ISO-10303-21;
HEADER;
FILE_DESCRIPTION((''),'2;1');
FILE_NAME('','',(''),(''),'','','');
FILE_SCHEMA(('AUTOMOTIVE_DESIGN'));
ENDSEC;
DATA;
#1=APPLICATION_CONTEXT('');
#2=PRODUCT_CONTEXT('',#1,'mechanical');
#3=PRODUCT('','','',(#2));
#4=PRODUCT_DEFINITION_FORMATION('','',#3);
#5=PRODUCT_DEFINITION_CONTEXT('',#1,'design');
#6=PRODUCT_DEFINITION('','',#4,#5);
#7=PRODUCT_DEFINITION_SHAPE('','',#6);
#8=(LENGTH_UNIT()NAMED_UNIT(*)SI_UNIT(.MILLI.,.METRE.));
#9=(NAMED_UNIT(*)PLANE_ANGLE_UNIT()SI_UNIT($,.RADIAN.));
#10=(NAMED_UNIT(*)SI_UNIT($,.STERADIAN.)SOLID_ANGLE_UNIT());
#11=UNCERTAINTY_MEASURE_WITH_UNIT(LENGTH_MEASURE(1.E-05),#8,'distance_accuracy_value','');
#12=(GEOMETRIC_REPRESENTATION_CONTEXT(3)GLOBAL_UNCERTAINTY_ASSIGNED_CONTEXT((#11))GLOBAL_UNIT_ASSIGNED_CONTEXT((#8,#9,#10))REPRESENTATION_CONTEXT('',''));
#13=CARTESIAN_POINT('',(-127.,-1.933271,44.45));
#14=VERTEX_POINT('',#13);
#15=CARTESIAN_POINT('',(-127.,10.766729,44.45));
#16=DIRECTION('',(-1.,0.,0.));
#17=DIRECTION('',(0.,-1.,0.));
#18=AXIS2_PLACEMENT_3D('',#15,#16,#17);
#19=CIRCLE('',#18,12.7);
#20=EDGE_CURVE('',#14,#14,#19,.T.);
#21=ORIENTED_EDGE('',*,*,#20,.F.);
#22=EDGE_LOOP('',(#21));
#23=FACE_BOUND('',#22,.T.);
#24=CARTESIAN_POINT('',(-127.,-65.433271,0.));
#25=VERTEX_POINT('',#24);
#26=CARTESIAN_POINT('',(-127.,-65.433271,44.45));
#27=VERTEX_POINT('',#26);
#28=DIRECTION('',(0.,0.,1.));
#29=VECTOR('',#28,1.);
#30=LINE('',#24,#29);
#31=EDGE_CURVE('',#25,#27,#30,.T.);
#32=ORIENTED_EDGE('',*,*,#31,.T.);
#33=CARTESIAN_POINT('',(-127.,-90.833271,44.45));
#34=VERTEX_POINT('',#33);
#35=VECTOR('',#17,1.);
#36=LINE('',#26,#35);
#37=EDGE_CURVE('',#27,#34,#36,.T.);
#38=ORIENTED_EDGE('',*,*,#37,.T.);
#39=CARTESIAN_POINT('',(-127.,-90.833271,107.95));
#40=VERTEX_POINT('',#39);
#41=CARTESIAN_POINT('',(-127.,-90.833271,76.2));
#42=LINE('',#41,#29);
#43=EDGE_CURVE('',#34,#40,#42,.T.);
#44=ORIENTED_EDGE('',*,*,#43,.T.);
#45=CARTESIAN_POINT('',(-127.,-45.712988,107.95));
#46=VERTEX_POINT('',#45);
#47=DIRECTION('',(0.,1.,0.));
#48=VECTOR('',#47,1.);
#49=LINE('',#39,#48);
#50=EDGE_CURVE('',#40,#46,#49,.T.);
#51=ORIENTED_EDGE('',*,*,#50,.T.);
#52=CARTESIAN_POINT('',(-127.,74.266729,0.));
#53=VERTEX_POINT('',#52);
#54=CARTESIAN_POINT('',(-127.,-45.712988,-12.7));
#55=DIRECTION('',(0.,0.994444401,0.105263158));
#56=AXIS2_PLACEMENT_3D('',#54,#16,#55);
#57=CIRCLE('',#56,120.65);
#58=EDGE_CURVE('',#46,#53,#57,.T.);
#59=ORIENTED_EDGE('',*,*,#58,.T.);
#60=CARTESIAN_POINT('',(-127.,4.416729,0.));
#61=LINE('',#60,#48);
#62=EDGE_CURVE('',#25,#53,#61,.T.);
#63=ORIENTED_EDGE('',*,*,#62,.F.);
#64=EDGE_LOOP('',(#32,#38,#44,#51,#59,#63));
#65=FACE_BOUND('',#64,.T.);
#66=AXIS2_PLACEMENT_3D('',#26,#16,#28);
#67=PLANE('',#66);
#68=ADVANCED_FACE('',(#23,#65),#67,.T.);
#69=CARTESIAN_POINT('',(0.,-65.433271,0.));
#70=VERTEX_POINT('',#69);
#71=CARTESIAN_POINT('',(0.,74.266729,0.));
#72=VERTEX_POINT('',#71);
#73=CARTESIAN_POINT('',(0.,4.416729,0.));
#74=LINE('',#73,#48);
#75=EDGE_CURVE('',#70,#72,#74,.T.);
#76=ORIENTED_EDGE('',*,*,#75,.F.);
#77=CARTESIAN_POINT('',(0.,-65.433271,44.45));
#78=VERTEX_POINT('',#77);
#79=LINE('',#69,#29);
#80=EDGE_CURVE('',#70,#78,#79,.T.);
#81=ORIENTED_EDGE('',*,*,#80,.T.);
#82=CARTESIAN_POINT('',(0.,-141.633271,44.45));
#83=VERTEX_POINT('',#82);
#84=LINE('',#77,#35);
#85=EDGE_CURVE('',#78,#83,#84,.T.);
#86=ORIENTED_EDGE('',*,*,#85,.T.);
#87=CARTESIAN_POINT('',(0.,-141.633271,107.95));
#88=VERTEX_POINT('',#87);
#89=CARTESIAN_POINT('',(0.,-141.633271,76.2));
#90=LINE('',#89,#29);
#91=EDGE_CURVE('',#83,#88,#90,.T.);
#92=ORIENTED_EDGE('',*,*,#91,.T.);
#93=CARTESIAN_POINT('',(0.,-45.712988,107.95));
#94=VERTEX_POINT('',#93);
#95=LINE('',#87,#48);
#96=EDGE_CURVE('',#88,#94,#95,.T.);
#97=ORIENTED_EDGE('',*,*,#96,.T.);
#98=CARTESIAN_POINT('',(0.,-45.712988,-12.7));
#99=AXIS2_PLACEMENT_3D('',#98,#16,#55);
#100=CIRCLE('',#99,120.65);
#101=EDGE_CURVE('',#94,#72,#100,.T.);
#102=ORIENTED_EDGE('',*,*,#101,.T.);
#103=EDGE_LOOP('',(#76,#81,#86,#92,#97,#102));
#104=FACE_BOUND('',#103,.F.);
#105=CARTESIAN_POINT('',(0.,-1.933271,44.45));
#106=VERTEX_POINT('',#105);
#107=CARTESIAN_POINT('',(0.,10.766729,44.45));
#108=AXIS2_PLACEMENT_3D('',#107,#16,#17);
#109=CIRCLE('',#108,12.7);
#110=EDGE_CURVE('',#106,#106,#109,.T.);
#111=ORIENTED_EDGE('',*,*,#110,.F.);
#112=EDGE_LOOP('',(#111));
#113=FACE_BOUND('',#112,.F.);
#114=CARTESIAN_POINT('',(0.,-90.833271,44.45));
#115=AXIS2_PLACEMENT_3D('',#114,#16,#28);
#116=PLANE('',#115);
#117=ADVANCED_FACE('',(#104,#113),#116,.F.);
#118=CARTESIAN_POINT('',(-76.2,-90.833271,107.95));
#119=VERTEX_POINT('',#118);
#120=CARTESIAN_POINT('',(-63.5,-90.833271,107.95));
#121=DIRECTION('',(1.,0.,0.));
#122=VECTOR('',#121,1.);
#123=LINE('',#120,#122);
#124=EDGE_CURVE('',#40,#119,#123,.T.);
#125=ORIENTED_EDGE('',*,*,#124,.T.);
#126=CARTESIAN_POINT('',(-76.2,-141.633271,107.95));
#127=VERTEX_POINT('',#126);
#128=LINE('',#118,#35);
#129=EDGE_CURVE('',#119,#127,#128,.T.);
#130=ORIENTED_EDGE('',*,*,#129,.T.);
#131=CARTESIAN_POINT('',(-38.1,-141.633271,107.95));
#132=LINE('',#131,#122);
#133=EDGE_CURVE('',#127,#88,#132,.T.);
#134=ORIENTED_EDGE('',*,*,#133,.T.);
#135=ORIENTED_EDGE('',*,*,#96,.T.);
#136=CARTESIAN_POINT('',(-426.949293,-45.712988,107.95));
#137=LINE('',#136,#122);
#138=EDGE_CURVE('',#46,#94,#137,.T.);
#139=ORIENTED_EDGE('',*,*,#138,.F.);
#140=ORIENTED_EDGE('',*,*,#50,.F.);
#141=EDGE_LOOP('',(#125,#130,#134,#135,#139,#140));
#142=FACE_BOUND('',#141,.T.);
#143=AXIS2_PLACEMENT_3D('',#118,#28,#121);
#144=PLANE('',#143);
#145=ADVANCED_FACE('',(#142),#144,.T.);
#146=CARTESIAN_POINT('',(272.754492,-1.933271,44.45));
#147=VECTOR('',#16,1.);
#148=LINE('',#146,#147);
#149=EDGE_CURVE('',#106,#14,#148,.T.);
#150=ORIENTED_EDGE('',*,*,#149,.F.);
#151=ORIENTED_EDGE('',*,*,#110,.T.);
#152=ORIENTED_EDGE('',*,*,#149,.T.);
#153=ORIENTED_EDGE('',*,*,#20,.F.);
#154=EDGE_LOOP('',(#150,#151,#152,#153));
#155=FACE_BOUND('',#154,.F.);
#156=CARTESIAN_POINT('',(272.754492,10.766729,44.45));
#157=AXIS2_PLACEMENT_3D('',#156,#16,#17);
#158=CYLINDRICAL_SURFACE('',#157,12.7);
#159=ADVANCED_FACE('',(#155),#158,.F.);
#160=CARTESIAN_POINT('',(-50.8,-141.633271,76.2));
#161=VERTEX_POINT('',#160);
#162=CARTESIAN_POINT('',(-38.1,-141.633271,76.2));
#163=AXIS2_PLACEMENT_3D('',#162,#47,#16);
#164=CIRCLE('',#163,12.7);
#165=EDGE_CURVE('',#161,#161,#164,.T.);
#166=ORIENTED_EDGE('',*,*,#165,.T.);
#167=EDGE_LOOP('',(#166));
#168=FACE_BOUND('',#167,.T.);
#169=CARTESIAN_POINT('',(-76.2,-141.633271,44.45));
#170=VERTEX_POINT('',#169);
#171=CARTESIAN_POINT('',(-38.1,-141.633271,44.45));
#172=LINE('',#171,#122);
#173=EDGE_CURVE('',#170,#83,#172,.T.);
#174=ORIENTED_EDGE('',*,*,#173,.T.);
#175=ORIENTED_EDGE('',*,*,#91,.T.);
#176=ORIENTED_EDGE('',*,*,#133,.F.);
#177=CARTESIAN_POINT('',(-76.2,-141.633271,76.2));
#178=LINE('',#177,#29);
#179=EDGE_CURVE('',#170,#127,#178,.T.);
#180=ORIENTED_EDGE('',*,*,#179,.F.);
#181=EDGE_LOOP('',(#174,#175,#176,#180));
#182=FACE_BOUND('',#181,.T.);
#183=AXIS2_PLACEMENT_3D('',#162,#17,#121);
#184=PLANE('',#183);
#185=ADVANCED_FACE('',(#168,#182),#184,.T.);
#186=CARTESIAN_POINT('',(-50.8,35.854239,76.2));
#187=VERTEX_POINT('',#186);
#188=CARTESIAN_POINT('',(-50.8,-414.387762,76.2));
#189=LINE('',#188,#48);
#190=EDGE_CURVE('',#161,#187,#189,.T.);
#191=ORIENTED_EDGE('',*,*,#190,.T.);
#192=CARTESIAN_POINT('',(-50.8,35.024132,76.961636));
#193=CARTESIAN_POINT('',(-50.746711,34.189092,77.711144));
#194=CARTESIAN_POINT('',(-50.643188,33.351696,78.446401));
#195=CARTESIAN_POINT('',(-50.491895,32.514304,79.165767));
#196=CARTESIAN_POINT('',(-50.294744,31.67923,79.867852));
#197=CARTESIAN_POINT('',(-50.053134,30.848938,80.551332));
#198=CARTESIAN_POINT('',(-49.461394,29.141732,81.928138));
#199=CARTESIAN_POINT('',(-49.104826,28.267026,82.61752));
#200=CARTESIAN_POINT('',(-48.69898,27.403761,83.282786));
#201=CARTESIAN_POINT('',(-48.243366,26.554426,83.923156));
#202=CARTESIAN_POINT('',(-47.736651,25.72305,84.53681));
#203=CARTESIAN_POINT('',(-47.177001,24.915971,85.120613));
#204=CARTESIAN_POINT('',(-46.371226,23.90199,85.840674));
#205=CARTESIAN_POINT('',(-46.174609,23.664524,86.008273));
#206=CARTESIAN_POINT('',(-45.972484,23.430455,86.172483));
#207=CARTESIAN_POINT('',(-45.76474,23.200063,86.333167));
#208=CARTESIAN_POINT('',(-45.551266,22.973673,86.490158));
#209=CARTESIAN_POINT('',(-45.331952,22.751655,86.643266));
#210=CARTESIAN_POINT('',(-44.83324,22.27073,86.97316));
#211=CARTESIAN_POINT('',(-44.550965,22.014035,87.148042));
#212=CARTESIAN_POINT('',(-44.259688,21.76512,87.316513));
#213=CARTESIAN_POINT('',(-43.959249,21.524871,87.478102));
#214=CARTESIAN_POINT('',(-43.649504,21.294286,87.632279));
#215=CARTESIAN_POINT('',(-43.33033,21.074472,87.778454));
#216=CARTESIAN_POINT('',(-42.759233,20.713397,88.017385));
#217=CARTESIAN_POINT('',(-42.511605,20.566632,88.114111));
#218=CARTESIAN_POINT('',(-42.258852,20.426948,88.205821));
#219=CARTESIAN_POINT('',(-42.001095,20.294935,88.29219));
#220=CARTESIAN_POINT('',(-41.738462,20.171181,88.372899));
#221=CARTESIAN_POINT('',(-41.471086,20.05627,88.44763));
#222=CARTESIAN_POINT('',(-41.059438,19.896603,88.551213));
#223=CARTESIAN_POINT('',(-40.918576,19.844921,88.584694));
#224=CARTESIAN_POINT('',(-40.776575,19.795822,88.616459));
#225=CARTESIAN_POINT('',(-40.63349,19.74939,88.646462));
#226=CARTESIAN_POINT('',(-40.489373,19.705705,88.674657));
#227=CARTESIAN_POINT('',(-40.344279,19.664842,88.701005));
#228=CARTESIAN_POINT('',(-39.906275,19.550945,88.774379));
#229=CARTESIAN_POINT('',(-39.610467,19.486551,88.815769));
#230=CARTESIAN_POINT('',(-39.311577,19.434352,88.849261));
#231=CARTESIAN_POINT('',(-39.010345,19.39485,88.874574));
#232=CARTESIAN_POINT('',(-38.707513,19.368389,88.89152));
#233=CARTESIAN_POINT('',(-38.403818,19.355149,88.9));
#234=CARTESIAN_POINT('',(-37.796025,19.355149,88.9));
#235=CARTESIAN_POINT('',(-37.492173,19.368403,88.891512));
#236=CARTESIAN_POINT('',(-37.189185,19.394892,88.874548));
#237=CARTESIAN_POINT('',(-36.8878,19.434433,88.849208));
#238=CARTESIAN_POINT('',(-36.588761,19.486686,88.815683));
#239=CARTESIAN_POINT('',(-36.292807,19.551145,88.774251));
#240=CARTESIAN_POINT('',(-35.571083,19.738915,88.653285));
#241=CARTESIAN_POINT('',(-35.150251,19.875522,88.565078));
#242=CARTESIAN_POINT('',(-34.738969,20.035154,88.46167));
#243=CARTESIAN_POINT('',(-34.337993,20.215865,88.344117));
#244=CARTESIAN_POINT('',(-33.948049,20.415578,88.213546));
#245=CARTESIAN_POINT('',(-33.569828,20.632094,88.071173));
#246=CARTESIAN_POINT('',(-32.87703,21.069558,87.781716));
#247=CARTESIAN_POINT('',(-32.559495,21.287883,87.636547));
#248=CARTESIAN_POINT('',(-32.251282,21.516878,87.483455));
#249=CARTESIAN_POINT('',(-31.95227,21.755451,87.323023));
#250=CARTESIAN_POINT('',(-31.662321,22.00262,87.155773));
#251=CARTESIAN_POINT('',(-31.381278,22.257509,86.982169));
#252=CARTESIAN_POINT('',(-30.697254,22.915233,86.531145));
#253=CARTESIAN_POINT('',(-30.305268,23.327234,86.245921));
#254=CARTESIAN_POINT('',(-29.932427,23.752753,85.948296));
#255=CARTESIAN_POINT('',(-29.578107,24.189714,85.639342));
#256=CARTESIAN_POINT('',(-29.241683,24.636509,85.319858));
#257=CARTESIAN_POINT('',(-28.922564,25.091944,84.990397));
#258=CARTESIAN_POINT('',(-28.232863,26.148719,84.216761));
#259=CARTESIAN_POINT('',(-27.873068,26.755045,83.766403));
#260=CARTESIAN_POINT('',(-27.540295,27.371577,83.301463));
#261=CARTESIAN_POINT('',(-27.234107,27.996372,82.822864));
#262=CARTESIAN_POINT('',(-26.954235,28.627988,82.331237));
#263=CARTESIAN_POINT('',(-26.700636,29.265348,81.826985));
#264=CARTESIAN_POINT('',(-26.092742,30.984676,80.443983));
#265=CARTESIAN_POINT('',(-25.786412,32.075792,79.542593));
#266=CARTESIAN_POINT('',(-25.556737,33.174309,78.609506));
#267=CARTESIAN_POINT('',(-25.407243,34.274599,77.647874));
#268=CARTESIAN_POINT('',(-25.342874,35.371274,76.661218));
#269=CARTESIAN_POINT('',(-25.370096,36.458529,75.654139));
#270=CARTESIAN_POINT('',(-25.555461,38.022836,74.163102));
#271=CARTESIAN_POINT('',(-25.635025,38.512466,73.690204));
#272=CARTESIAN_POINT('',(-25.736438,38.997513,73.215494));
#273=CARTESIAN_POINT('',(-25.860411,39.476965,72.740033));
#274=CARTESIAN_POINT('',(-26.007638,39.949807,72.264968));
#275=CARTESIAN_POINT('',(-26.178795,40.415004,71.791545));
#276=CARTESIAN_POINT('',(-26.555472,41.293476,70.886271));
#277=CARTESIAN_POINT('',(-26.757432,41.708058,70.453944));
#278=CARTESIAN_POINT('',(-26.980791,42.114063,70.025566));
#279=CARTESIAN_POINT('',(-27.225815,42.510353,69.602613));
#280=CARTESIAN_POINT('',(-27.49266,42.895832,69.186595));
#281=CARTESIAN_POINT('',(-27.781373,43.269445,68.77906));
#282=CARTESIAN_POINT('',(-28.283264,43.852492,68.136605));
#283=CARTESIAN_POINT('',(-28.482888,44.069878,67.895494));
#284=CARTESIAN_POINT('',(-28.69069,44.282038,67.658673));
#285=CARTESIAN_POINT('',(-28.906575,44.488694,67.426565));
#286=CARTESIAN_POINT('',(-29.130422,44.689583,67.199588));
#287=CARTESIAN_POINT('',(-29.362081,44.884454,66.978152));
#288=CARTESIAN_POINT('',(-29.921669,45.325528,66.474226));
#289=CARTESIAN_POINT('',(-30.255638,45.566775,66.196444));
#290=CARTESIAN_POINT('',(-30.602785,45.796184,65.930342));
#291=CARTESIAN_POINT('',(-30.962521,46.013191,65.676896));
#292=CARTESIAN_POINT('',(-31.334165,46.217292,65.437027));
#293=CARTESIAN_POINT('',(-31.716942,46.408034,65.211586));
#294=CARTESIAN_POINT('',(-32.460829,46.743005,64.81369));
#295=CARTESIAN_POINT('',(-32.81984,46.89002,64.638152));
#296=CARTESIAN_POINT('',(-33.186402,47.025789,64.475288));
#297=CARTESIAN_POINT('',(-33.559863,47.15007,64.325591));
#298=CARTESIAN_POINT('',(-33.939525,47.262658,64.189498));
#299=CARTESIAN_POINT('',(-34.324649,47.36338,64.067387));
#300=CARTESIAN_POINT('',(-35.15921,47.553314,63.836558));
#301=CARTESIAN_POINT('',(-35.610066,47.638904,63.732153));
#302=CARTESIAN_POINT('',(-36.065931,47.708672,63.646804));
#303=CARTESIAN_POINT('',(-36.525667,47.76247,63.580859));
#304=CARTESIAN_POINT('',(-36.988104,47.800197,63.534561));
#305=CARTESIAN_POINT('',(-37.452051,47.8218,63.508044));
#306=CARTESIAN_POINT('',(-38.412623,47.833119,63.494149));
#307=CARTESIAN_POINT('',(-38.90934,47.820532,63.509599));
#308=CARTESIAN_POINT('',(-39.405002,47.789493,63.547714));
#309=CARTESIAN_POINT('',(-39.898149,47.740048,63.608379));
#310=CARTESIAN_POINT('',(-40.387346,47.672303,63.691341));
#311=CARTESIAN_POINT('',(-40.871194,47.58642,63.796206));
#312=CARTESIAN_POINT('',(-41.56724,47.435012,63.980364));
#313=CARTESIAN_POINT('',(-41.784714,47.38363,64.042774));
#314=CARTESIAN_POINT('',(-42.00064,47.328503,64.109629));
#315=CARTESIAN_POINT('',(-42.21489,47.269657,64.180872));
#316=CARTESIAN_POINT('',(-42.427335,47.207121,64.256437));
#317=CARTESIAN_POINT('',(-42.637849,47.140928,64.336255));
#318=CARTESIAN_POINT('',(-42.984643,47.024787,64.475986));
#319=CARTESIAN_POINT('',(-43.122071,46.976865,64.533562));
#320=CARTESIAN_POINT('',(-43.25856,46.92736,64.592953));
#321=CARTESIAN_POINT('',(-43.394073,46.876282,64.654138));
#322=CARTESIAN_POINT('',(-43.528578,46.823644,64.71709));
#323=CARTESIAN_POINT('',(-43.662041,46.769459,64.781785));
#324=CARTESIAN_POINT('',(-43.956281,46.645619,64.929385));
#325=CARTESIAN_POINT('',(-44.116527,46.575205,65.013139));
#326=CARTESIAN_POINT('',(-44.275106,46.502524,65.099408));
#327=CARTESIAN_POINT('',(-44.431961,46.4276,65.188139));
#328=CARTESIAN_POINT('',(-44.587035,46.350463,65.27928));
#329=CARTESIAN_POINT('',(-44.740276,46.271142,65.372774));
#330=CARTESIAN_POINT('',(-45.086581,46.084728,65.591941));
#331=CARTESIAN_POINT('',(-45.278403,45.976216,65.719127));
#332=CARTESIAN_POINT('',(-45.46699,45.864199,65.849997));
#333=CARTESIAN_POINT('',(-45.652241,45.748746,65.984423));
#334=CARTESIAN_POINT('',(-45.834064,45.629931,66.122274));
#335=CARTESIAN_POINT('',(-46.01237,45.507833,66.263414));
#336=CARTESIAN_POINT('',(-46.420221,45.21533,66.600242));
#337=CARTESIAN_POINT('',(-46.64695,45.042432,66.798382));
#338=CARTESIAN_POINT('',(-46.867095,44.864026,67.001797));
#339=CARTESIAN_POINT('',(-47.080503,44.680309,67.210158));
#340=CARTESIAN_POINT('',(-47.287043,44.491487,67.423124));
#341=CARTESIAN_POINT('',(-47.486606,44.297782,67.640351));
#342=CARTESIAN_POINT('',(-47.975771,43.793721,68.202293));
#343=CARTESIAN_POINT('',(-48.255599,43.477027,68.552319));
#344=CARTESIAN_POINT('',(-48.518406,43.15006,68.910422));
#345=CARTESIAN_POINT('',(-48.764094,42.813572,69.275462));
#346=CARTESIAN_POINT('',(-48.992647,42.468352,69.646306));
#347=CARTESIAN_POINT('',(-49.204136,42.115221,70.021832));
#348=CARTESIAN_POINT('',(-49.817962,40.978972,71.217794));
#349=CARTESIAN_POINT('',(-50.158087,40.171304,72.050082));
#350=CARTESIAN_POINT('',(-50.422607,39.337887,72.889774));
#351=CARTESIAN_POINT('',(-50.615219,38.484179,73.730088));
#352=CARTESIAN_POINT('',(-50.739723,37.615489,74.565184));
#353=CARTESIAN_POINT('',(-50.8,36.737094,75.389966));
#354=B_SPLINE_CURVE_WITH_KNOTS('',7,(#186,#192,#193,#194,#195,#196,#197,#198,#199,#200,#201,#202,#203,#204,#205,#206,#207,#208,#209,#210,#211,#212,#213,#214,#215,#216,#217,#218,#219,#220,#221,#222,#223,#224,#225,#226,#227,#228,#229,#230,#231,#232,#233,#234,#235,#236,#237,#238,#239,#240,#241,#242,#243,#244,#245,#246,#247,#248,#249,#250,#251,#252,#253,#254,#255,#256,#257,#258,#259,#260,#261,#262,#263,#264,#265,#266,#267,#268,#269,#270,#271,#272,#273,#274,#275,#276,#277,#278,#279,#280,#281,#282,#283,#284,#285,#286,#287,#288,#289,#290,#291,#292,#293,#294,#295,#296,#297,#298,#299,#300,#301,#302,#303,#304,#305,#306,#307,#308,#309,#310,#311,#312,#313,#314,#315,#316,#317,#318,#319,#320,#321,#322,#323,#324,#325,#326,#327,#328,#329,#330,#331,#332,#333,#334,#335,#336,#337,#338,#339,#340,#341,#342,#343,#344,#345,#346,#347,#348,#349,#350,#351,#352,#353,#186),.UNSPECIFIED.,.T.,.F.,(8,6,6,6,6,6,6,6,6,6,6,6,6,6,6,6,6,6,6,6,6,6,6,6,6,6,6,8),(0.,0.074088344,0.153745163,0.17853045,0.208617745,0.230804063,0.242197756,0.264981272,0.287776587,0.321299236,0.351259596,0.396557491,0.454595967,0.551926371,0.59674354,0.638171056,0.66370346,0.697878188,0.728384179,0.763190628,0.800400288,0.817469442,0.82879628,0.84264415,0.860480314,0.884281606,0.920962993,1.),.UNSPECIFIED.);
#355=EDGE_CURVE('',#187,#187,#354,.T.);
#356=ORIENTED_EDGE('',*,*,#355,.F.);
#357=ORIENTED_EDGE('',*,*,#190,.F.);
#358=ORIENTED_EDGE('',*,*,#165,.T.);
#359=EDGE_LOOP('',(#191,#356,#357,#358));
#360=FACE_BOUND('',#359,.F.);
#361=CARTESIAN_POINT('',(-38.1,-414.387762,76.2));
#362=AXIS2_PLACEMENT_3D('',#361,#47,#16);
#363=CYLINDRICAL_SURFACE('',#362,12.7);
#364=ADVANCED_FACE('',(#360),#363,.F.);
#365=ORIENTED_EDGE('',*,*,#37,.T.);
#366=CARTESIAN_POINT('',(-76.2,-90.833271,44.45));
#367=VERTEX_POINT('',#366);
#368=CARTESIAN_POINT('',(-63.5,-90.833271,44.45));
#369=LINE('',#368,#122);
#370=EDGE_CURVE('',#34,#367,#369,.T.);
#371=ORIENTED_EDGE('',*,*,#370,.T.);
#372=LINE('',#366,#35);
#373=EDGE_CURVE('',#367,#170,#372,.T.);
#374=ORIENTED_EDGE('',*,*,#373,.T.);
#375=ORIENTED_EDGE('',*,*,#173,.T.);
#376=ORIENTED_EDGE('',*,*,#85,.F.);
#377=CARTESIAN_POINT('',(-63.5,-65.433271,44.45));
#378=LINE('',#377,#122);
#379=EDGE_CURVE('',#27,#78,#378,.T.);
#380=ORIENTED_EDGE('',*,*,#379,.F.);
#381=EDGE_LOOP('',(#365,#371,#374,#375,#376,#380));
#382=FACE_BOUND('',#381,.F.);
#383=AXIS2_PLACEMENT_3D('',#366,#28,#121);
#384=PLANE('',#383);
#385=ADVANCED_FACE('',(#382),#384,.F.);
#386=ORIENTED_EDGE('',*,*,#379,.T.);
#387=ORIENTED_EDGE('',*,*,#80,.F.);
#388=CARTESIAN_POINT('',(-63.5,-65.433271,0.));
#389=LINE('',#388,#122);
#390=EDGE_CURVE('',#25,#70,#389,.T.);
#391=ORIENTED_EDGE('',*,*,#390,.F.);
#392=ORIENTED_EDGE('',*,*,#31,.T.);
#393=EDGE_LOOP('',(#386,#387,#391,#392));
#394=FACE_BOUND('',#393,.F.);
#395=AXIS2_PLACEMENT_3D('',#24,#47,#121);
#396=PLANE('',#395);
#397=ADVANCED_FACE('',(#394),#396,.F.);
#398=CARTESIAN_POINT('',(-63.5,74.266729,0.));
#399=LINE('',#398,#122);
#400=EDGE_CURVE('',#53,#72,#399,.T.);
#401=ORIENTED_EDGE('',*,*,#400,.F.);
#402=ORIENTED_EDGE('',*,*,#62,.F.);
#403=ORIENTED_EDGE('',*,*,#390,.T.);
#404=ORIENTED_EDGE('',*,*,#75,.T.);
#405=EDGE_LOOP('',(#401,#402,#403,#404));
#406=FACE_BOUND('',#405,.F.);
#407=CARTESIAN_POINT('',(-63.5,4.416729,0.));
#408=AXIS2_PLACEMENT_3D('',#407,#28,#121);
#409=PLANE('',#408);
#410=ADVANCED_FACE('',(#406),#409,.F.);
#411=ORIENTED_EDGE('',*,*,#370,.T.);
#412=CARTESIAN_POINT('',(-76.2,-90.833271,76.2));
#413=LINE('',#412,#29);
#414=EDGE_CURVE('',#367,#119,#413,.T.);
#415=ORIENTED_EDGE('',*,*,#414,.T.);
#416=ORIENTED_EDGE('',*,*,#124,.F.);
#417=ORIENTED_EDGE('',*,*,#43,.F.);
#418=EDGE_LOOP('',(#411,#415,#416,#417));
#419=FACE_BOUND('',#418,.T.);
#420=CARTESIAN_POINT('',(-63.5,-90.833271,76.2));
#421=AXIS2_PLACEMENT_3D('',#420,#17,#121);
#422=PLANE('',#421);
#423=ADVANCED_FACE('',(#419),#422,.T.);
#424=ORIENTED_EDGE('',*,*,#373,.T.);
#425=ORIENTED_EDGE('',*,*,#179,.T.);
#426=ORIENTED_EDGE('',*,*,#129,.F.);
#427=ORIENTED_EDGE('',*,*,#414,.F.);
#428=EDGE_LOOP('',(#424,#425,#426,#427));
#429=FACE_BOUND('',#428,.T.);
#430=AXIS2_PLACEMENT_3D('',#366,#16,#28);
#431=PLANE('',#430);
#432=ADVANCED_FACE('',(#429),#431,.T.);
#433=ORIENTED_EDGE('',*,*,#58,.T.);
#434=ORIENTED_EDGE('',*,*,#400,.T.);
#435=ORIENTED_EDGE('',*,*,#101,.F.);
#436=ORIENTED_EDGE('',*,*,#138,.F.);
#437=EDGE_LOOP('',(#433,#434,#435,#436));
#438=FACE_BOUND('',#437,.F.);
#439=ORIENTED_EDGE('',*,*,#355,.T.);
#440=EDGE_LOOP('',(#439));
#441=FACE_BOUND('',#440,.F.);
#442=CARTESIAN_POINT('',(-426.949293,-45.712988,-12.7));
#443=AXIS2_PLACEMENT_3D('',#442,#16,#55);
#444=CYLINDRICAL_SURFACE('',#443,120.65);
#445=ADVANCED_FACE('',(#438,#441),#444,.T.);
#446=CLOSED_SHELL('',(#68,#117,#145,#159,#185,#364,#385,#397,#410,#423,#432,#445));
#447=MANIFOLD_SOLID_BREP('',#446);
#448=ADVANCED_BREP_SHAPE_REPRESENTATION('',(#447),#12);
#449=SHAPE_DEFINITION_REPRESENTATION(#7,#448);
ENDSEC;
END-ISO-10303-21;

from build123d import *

# Parameters (mm, degrees)
F0_W        = 127
F0_H        = 139.7
F1_DEPTH    = 107.95
F2_T1_DEPTH = 726.8985851792
F3_W        = 127
F3_H        = 63.5
F4_DEPTH    = 25.4
F5_W        = 76.2
F5_H        = 63.5
F6_DEPTH    = 50.8
F8_D        = 25.4
F10_D       = 25.4


# Not quite as in the source:
# - a fillet or chamfer that OpenCascade refuses, or shapes differently, is made with other operations: its cross-section is extruded or revolved along the edge and cut away or added


with BuildPart() as f1:
    # F0 (on Top) → F1 (new body)
    with BuildSketch(Plane.XY):
        with Locations((-63.5, 4.4167287707)):
            Rectangle(F0_W, F0_H)
    extrude(amount=F1_DEPTH)

    # F2: fillet of radius 120.65 on 1 edges, made by hand

    # F2_s2 → F2_t1 (cut)
    with BuildSketch(Plane.YZ.offset(-426.9492925896)):
        with BuildLine():
            ThreePointArc((74.2667287707, 0), (34.9844946572, 76.9902377631), (-45.7129882651, 107.95))
            Line((-45.7129882651, 107.95), (74.2667287707, 107.95))
            Line((74.2667287707, 107.95), (74.2667287707, 0))
        make_face()
    extrude(amount=F2_T1_DEPTH, mode=Mode.SUBTRACT)

    # F3 (on face) → F4 (join)
    with BuildSketch(Plane.XZ.offset(65.4332712293)):
        with Locations((-63.5, 76.2)):
            Rectangle(F3_W, F3_H)
    extrude(amount=F4_DEPTH)

    # F5 (on face) → F6 (join)
    with BuildSketch(Plane.XZ.offset(90.8332712293)):
        with Locations((-38.1, 76.2)):
            Rectangle(F5_W, F5_H)
    extrude(amount=F6_DEPTH)

    # F8 (through all)
    with Locations(Plane.XZ.offset(141.6332712293)):
        with Locations((-38.1, 76.2)):
            Hole(F8_D / 2)

    # F10 (through all)
    with Locations(Plane.YZ):
        with Locations((10.7667287707, 44.45)):
            Hole(F10_D / 2)


solid = f1.part
